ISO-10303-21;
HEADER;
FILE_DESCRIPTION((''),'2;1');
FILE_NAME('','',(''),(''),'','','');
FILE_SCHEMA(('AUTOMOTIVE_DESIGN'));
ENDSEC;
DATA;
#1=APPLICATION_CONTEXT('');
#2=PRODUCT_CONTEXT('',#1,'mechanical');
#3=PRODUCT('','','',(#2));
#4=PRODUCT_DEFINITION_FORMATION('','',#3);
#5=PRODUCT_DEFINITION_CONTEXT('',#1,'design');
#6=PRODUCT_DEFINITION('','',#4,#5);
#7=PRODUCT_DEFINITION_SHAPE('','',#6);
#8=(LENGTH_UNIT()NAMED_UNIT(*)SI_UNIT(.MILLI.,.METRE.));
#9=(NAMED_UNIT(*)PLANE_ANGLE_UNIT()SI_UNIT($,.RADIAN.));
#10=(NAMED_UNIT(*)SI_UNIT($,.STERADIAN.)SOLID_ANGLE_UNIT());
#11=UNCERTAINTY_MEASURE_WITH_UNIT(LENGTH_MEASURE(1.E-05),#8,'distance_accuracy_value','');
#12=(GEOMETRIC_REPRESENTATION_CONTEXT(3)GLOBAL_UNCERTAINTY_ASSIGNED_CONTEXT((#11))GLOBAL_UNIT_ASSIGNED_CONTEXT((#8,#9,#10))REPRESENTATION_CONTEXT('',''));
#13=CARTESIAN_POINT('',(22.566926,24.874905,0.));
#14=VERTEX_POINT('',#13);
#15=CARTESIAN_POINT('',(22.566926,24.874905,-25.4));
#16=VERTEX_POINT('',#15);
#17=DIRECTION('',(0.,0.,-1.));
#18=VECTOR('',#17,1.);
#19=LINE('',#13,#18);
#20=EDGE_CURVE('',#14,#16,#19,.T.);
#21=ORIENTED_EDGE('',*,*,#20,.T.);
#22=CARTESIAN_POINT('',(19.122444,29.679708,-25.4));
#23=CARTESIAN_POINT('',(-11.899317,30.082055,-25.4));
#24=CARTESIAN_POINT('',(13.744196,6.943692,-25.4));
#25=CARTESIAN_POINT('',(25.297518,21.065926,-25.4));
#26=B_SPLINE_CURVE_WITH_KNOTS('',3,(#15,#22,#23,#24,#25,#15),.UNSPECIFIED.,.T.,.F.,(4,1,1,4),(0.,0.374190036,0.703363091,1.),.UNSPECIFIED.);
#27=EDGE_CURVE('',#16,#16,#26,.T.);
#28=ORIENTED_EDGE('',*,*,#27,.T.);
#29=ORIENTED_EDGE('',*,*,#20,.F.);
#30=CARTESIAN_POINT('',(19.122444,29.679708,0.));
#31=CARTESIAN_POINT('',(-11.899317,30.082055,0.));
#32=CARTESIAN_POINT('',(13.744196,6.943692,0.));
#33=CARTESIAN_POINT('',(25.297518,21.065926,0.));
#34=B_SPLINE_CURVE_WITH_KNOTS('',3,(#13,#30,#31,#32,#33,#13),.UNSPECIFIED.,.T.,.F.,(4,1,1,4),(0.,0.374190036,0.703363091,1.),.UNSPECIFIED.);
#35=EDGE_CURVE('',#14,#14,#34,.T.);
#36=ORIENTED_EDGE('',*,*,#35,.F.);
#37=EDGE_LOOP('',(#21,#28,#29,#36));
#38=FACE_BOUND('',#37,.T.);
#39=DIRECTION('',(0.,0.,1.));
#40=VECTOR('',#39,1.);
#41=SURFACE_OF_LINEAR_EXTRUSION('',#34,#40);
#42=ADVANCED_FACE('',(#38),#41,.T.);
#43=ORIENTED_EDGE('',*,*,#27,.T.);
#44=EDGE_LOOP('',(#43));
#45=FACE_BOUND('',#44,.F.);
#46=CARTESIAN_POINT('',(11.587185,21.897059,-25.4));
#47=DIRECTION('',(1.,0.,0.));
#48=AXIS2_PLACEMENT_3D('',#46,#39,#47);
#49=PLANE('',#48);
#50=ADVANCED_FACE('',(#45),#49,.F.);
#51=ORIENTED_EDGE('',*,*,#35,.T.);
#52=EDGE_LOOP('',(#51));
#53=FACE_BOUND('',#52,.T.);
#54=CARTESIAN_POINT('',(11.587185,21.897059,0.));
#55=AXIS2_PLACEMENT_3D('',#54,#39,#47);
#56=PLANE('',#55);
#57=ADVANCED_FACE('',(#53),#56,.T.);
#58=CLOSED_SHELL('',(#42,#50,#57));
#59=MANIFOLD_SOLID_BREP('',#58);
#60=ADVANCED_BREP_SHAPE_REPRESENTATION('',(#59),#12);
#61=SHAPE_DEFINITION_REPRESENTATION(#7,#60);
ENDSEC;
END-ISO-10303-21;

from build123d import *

# Parameters (mm, degrees)
F3_DEPTH = 25.4


# Not quite as in the source:
# - the program builds the solid bodies; features that only make, move or delete a surface that nothing else refers to are left out


with BuildPart() as f3:
    # F2 (on Top) → F3 (new body)
    with BuildSketch(Plane.XY):
        with BuildLine():
            add(Edge.make_bspline(
                [(22.5669257343, 24.8749051243), (19.1224438946, 29.6797083312), (-11.8993173459, 30.0820552908), (13.7441964683, 6.9436916311), (25.2975180775, 21.0659261667), (22.5669257343, 24.8749051243)],
                knots=[0, 0, 0, 0, 0.3741900355, 0.7033630911, 1, 1, 1, 1], degree=3))
        make_face()
    extrude(amount=-F3_DEPTH)


solid = f3.part
